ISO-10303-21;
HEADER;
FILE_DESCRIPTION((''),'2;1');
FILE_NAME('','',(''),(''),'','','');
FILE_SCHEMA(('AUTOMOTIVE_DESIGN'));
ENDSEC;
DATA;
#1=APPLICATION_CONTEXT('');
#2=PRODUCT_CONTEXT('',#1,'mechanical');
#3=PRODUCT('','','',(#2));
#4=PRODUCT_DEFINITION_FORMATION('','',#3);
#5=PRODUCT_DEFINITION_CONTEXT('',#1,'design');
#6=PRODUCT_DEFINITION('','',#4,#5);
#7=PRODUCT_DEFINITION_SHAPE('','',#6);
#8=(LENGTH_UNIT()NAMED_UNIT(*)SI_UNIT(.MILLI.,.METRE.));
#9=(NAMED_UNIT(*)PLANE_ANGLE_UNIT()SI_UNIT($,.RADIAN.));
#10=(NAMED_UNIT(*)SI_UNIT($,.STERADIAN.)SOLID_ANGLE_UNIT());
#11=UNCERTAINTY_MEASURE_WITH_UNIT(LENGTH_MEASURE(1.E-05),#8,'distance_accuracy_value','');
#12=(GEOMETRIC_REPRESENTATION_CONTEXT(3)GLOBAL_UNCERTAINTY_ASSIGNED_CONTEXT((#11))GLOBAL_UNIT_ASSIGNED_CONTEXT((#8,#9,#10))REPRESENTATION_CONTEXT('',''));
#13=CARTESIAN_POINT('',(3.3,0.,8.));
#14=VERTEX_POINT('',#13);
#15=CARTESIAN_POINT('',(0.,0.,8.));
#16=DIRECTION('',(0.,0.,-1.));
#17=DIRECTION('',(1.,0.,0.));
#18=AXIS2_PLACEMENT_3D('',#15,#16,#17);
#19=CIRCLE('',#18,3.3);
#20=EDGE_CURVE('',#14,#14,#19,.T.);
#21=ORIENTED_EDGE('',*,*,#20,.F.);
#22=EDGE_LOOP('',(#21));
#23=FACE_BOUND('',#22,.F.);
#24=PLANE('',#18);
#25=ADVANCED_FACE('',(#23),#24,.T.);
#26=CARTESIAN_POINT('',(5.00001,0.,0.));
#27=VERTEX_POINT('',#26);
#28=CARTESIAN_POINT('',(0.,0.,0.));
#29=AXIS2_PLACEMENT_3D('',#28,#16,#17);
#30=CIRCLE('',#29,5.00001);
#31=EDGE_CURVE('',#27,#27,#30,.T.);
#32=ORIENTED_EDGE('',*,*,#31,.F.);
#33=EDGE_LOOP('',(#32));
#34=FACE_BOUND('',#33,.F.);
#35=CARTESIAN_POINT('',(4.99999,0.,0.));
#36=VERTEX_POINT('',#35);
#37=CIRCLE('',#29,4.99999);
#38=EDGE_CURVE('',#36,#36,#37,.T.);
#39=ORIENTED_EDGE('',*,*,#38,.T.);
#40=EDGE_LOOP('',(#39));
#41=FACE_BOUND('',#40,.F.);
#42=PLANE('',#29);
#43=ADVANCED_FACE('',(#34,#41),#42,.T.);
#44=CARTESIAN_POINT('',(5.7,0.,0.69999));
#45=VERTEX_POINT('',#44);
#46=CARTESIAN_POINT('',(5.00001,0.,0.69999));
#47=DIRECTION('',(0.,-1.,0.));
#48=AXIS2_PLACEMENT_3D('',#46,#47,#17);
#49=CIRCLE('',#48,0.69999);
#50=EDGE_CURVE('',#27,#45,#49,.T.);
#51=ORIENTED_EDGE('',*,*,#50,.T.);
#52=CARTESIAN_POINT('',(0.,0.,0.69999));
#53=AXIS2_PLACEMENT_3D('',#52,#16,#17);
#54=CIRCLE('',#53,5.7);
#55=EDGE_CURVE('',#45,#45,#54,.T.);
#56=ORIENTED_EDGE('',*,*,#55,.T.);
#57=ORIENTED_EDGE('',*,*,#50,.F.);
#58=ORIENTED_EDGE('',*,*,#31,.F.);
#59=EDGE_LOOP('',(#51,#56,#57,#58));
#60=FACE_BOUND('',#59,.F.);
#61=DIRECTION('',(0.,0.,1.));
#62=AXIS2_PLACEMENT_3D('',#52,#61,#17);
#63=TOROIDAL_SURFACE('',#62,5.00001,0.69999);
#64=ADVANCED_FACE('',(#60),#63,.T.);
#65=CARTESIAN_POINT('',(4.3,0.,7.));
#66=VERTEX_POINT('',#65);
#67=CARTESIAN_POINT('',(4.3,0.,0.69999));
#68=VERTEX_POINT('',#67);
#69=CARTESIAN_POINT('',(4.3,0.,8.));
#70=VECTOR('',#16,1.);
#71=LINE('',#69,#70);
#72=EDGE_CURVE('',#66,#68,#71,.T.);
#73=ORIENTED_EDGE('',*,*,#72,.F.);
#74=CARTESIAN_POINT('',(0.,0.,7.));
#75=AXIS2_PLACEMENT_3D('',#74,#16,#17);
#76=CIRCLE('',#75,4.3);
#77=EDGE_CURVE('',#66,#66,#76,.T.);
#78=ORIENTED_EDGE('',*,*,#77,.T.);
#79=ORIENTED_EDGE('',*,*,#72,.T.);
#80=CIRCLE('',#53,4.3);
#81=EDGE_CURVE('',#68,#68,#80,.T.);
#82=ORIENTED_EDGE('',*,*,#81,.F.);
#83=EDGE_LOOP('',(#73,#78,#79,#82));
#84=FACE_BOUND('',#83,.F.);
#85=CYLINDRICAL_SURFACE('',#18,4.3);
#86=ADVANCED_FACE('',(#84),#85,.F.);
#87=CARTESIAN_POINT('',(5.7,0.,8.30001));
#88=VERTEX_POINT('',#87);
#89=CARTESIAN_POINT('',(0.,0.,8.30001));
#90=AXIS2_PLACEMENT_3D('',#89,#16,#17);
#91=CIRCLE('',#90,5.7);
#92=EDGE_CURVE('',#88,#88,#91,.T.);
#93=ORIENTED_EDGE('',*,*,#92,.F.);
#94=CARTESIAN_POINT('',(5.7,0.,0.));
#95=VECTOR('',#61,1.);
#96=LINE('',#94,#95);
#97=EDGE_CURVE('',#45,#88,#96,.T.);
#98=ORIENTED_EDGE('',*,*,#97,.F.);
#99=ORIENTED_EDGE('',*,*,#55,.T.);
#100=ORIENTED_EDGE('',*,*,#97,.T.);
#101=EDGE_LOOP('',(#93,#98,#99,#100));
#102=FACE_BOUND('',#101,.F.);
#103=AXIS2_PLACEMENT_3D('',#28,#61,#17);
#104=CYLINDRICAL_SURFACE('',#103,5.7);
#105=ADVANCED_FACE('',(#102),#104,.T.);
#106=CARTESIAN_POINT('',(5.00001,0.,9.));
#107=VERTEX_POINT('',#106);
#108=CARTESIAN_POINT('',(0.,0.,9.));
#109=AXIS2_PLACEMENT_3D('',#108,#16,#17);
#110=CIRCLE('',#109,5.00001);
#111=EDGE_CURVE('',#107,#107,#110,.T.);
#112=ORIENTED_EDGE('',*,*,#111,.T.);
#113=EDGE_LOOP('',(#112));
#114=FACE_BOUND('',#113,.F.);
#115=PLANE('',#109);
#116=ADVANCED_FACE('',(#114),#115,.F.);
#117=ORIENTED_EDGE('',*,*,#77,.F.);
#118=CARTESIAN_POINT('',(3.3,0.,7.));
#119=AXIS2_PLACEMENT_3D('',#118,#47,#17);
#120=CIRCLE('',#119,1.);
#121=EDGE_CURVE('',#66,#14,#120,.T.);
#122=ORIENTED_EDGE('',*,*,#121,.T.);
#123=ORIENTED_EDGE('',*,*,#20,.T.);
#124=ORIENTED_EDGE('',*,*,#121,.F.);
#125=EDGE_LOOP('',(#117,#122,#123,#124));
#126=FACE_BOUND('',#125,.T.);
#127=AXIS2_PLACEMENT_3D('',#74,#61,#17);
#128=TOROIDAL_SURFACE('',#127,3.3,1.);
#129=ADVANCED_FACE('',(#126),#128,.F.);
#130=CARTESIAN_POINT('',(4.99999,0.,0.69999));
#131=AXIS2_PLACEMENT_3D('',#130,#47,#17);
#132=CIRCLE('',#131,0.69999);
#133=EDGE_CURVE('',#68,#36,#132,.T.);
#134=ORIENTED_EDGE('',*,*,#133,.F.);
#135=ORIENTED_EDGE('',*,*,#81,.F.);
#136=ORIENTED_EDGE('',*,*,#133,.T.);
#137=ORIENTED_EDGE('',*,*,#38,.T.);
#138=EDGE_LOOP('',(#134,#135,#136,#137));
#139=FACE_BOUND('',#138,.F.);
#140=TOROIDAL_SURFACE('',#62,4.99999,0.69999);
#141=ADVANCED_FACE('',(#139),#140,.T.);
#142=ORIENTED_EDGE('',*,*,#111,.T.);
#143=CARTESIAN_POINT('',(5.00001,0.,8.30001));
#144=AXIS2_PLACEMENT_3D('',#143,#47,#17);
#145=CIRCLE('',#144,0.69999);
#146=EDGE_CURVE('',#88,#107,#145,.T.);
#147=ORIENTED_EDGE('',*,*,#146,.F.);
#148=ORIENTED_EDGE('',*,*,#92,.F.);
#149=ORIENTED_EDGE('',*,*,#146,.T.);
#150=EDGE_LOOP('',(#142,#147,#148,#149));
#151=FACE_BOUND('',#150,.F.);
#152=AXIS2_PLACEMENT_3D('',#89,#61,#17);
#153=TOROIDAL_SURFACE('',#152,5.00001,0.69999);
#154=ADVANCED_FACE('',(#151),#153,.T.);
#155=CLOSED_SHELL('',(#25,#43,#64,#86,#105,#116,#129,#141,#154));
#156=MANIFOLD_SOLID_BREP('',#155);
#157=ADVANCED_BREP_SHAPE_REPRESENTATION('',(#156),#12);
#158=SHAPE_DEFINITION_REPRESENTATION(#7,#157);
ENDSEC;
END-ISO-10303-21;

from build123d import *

# Parameters (mm, degrees)
F2_R = 0.69999
F3_R = 1


# Not quite as in the source:
# - a fillet or chamfer is up to 0.001 mm smaller than in the source, because OpenCascade refuses the exact size


with BuildPart() as f1:
    # F0 (on Front) → F1 (revolve)
    with BuildSketch(Plane.XZ):
        Polygon((0, 9), (0, 8), (4.3, 8), (4.3, 0), (5.7, 0), (5.7, 9), align=None)
    revolve(axis=Axis((0, 0, 8.5), (0, 0, -1)))

    # F2 (radius 0.7 in the source; OpenCascade refuses exactly that, so slightly less here)
    f2_edges = [f1.edges().sort_by_distance(p)[0] for p in [
        (-5.7, 0, 0),
        (-4.3, 0, 0),
        (-5.7, 0, 9),
    ]]
    fillet(f2_edges, radius=F2_R)

    # F3
    f3_edges = [f1.edges().sort_by_distance(p)[0] for p in [
        (-4.3, 0, 8),
    ]]
    fillet(f3_edges, radius=F3_R)


solid = f1.part
